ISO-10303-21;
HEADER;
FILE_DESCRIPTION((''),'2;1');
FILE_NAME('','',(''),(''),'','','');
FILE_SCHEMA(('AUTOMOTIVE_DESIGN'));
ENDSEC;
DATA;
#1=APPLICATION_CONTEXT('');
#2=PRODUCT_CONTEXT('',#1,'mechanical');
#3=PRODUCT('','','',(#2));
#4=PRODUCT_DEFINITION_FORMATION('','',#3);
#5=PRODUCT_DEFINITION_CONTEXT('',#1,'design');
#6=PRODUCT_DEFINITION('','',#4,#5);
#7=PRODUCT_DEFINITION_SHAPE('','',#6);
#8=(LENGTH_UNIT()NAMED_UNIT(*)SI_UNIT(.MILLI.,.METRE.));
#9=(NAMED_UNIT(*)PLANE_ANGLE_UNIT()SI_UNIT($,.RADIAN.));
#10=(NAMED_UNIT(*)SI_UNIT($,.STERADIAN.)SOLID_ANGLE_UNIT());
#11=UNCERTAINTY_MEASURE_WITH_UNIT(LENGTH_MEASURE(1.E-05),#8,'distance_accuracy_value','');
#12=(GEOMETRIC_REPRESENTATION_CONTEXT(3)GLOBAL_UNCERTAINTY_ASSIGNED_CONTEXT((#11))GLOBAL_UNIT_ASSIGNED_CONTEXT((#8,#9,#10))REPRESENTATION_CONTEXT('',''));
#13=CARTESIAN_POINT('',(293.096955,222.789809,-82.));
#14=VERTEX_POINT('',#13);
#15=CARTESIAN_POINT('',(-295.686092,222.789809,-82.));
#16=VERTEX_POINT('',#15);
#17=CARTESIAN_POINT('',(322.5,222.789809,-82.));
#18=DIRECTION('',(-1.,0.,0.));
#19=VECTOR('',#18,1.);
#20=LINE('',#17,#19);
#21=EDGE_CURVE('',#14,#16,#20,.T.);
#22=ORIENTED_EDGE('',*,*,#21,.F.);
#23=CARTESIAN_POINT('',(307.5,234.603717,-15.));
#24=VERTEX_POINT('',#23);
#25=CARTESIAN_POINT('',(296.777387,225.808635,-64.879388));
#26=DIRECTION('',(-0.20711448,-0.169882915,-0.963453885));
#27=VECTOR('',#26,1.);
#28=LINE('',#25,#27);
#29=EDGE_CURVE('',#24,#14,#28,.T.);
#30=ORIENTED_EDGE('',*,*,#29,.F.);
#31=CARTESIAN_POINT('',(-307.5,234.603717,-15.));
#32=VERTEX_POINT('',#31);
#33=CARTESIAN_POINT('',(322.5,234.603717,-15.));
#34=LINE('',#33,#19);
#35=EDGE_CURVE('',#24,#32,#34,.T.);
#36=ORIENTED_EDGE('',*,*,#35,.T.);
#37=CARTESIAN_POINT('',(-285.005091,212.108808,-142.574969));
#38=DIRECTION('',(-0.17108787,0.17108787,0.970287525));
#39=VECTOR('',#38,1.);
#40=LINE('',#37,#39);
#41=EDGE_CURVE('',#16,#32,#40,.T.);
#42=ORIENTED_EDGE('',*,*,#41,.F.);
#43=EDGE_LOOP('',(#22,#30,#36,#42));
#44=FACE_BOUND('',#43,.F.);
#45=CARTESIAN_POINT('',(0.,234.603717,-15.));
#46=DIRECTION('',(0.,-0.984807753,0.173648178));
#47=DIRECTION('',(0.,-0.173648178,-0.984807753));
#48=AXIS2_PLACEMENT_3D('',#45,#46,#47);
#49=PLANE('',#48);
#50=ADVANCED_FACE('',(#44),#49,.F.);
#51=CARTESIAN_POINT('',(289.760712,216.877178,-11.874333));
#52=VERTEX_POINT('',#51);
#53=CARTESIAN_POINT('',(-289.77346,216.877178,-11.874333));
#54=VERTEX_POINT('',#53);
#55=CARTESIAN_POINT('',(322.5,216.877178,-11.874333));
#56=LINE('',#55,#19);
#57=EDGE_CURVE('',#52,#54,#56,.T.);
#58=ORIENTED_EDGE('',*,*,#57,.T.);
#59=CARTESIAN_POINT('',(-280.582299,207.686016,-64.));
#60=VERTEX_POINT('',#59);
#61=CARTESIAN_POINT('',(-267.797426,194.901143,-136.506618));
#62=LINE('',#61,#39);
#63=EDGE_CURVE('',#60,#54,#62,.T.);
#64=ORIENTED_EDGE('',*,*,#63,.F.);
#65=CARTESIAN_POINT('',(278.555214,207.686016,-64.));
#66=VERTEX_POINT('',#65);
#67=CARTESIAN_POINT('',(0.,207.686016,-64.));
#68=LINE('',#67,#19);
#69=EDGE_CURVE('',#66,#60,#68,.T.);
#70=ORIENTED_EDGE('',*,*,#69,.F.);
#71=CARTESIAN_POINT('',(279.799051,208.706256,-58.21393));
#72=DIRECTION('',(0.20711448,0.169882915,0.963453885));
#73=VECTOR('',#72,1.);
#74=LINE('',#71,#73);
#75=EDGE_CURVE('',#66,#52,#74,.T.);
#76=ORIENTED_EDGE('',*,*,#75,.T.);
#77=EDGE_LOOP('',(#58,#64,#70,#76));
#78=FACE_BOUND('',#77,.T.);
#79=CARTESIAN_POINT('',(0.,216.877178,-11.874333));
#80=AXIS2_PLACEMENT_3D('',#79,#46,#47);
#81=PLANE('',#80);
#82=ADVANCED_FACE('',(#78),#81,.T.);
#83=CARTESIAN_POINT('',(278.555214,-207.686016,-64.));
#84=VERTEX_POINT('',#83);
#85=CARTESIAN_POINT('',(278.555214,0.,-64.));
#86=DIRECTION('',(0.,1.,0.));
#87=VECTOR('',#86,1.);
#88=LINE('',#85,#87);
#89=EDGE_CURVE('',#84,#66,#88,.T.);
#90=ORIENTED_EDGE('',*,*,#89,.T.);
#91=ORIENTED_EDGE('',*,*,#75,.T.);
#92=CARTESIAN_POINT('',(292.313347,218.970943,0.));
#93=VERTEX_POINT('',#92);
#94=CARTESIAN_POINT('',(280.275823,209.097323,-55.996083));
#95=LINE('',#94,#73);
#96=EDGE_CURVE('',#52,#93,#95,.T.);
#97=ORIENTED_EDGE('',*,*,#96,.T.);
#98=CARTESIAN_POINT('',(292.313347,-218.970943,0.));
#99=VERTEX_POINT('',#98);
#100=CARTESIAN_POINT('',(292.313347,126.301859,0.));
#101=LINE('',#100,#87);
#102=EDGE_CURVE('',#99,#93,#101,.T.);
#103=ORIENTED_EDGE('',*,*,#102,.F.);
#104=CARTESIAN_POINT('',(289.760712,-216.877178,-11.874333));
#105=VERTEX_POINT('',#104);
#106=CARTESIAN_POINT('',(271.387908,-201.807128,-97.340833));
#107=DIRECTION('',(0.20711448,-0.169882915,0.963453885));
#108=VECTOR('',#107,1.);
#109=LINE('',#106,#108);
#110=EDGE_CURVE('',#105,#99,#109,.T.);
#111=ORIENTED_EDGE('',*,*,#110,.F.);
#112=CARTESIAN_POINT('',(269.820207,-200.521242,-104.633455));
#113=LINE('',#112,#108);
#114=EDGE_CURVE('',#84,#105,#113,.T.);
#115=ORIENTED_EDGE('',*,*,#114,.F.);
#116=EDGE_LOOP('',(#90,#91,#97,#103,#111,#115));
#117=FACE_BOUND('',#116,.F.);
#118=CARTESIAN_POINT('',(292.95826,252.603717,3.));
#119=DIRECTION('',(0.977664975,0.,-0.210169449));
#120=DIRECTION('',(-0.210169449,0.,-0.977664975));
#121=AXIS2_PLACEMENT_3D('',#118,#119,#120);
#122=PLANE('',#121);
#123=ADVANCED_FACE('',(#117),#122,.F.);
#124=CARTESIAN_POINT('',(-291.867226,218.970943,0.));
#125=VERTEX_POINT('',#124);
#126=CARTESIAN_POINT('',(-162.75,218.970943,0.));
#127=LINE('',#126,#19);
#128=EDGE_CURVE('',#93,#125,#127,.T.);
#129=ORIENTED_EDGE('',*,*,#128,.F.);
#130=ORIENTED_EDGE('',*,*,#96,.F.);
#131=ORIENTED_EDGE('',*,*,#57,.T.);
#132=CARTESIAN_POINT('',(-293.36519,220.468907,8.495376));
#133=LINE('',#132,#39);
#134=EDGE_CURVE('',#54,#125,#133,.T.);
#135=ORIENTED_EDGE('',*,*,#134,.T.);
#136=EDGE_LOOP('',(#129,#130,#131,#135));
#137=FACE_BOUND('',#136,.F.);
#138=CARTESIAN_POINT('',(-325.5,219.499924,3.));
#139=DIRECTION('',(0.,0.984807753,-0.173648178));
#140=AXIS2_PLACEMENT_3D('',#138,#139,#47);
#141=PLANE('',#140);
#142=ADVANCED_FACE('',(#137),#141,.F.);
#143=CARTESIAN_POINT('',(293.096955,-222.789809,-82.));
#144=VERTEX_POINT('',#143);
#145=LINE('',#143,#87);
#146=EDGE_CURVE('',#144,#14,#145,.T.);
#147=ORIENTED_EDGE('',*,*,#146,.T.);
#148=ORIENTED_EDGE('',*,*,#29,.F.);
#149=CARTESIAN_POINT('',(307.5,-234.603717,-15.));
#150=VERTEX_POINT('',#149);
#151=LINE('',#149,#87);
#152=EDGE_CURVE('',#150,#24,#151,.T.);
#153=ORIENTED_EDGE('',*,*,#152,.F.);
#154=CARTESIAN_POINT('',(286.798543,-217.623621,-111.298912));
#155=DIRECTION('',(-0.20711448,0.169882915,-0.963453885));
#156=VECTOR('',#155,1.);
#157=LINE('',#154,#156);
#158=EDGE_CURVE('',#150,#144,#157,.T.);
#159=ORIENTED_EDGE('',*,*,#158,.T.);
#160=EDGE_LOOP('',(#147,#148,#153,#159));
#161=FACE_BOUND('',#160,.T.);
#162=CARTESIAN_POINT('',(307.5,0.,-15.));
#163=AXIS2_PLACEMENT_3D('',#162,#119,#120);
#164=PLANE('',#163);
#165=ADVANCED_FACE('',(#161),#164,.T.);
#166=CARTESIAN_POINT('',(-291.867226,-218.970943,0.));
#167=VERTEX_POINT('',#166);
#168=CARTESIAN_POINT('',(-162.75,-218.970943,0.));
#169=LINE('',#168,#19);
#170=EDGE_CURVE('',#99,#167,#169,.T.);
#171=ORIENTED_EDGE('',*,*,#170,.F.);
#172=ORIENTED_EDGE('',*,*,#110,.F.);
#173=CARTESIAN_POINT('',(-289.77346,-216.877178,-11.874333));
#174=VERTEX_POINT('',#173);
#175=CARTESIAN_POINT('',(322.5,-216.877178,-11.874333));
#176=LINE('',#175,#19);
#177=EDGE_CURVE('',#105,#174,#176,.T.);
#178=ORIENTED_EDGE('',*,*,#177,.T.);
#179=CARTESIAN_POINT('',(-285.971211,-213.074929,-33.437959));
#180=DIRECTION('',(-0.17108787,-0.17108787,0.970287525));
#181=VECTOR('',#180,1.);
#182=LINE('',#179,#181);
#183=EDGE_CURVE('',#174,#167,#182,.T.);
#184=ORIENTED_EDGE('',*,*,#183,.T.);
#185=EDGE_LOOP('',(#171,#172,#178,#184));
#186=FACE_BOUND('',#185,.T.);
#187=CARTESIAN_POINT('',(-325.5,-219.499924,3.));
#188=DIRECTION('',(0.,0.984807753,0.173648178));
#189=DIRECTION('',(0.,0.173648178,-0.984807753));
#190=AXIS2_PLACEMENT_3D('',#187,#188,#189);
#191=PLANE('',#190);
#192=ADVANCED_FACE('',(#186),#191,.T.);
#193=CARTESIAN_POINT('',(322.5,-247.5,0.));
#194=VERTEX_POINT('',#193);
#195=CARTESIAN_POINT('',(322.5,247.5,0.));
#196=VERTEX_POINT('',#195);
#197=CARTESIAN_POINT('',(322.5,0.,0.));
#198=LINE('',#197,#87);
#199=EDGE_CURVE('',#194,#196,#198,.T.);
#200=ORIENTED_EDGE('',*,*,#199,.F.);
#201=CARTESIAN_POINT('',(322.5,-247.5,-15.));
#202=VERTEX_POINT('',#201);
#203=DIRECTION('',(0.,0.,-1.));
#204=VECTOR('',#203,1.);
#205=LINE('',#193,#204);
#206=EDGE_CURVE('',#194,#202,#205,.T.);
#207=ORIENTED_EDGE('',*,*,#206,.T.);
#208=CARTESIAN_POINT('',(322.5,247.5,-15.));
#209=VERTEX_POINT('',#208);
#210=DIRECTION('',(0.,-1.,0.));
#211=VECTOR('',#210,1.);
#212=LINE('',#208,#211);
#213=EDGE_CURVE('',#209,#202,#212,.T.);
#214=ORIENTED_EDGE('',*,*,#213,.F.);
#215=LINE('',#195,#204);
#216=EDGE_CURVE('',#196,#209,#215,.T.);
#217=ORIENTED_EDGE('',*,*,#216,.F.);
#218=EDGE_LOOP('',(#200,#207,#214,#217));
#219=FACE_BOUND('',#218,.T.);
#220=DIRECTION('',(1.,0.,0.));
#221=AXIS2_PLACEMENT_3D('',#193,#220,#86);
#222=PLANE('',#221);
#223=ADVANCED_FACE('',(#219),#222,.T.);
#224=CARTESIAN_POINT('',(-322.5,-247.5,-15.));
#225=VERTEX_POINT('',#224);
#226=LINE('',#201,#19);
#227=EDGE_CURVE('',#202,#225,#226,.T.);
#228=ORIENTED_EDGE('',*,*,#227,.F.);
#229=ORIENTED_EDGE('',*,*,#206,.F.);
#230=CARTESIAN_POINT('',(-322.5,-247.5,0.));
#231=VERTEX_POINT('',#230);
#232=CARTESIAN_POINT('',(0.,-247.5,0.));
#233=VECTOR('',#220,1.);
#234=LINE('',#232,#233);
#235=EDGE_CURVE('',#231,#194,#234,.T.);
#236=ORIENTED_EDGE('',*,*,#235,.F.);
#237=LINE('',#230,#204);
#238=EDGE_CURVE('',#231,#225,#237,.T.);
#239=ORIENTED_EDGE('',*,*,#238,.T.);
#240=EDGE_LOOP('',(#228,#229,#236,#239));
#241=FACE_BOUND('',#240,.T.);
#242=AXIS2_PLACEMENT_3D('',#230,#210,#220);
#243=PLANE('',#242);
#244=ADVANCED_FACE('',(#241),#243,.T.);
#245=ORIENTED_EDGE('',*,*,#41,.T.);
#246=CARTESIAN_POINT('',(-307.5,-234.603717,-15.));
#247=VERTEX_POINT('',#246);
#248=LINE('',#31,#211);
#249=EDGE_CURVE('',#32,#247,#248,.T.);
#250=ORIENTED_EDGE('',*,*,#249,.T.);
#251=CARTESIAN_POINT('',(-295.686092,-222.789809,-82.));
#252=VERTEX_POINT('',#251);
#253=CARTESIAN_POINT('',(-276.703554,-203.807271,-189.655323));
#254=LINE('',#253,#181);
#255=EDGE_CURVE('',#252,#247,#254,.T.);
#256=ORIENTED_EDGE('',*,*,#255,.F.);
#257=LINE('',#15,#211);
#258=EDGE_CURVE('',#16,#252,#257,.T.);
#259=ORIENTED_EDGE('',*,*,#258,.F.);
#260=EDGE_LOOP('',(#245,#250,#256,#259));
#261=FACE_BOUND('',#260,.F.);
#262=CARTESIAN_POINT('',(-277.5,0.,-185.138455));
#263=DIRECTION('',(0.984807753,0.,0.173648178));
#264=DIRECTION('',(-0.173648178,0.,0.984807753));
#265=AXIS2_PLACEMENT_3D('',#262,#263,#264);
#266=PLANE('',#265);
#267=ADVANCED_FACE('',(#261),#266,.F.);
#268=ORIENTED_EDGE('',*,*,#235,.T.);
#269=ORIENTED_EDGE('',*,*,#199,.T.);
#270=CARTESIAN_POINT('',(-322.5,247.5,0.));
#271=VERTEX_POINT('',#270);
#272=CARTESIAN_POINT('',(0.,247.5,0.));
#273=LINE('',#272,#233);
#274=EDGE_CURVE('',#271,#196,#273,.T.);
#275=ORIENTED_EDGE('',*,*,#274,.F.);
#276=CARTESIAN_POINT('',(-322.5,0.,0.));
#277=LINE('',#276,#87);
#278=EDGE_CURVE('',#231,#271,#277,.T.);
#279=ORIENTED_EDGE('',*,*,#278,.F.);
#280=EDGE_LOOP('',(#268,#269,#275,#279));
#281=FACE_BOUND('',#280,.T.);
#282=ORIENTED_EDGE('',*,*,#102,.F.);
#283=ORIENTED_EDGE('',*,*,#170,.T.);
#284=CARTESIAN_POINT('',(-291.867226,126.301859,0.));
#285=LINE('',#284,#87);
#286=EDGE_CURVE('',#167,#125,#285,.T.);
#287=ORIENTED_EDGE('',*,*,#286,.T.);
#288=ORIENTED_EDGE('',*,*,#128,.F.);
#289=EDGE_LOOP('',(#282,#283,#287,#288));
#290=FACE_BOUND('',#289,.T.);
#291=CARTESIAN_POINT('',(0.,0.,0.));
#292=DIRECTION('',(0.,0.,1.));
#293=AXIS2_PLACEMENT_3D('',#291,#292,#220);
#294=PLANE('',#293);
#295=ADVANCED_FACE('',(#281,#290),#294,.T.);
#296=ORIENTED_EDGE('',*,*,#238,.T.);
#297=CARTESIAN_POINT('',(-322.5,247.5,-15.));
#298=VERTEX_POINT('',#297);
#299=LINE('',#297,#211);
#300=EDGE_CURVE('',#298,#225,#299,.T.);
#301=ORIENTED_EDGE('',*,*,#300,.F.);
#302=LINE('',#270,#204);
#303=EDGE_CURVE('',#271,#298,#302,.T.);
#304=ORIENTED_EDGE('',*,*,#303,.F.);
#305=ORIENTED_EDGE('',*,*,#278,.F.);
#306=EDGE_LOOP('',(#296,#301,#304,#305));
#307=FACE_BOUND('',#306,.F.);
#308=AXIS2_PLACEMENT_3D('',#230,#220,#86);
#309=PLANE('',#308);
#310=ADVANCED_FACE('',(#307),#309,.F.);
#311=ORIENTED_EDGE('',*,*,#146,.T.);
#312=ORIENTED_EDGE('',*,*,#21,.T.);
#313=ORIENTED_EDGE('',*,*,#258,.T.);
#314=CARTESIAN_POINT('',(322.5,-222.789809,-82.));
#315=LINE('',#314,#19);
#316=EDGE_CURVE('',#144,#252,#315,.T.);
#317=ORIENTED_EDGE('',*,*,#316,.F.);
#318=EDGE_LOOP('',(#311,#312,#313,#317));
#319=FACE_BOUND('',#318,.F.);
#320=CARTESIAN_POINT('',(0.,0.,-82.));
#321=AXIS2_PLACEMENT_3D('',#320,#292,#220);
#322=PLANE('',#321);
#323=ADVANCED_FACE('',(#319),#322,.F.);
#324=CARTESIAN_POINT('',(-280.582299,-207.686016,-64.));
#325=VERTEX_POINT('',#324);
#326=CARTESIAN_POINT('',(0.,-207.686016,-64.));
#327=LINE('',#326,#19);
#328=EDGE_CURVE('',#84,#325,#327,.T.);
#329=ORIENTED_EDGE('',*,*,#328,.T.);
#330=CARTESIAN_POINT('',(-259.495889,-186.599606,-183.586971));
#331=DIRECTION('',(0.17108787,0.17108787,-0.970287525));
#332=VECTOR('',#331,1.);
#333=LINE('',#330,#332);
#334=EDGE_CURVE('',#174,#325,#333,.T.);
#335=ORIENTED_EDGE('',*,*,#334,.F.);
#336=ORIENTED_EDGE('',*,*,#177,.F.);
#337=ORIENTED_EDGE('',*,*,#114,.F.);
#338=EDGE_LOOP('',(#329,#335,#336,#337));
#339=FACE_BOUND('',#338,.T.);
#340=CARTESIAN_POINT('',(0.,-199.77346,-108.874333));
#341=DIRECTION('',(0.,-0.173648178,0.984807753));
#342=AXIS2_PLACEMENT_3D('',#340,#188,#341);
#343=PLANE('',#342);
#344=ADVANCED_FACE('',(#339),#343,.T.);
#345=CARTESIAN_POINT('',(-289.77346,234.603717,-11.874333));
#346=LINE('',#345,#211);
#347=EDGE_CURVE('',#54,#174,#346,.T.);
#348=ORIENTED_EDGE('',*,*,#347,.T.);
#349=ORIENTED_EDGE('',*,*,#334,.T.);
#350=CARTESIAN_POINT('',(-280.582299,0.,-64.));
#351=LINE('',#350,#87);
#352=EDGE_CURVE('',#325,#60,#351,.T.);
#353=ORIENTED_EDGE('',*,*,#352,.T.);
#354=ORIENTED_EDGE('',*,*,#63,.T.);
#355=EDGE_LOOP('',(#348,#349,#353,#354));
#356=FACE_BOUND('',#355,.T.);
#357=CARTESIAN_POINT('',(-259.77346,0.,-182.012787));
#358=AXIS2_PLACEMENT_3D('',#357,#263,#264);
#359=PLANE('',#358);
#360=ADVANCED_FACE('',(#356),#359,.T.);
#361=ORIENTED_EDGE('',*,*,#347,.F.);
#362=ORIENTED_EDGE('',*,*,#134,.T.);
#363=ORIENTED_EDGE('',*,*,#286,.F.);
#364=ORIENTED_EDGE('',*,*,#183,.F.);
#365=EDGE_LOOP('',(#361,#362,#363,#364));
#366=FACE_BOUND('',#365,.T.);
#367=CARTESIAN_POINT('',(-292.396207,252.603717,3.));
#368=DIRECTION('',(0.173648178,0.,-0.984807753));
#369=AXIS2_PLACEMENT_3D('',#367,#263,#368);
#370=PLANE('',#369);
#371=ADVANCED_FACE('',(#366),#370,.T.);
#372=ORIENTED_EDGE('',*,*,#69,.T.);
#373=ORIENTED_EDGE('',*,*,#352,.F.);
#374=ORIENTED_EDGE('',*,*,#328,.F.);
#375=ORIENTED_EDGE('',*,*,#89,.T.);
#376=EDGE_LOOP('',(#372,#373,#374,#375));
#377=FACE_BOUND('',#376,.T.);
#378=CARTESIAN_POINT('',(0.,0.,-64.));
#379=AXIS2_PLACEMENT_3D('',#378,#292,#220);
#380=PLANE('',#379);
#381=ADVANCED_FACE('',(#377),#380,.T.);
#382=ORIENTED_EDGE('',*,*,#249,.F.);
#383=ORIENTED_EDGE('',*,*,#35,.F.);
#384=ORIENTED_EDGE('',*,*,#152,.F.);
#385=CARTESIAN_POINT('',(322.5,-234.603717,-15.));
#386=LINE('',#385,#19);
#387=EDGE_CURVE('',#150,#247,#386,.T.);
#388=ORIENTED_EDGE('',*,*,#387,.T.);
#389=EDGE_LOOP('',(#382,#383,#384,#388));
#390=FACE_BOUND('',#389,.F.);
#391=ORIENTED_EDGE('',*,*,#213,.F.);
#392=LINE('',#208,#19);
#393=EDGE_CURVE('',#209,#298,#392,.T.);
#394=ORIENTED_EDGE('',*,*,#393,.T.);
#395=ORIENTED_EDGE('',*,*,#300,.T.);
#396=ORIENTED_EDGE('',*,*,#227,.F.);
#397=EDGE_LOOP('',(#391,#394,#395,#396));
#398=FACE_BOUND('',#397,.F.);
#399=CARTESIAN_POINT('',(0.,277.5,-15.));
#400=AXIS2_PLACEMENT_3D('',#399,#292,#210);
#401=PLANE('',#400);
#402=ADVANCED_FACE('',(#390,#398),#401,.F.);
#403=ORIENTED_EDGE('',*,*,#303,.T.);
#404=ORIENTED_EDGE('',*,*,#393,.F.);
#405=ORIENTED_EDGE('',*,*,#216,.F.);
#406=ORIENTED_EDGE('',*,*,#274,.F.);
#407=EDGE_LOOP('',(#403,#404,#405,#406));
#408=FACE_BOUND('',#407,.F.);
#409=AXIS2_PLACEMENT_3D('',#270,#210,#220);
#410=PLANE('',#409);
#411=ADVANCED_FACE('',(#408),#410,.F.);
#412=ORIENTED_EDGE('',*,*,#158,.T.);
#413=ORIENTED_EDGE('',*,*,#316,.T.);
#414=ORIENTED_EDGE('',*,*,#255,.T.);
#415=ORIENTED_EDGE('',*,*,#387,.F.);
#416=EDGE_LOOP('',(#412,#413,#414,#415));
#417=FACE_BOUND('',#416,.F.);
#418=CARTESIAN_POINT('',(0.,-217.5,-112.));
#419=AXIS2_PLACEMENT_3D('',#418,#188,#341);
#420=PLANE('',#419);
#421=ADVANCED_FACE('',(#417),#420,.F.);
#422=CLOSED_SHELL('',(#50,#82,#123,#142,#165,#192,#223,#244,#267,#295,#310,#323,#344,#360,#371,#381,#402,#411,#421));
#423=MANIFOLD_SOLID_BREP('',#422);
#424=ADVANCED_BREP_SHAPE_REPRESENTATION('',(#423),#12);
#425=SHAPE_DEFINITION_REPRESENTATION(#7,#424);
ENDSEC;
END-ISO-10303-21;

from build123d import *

# Parameters (mm, degrees)
F0_W          = 645
F0_H          = 495
F1_DEPTH      = 82
F3_DEPTH      = 322.501
F3_DEPTH_BACK = 495
F5_DEPTH      = 365
F5_DEPTH_BACK = 341
F6_T          = 18
F6_T3_DEPTH   = 505.2074342574
F6_T5_DEPTH   = 651


# Not quite as in the source:
# - a shell that OpenCascade refuses in one call is made with other operations: the cavity is built on its own and cut out


with BuildPart() as f1:
    # F0 (on Top) → F1 (new body)
    with BuildSketch(Plane.XY):
        Rectangle(F0_W, F0_H)
    extrude(amount=-F1_DEPTH)

    # F2 (on Right) → F3 (cut, two sides)
    with BuildSketch(Plane.YZ) as f3_sk:
        Polygon((-277.5, -15), (-277.5, -112), (-217.5, -112), (-234.6037171287, -15), align=None)
        Polygon((277.5, -15), (234.6037171287, -15), (217.5, -112), (277.5, -112), align=None)
    extrude(amount=F3_DEPTH, mode=Mode.SUBTRACT)
    extrude(f3_sk.sketch, amount=-F3_DEPTH_BACK, mode=Mode.SUBTRACT)

    # F4 (on Front) → F5 (cut, two sides)
    with BuildSketch(Plane.XZ) as f5_sk:
        Polygon((-337.5, -15), (-337.5, -185.1384545885), (-277.5, -185.1384545885), (-307.5, -15), align=None)
        Polygon((337.5, -15), (307.5, -15), (277.5415446769, -154.3605614963), (337.5, -156.5929672103), align=None)
    extrude(amount=F5_DEPTH, mode=Mode.SUBTRACT)
    extrude(f5_sk.sketch, amount=-F5_DEPTH_BACK, mode=Mode.SUBTRACT)

    # F6: shell of thickness 18, made by hand


with BuildPart() as f6_core1:
    # F6_t2: copy of F1
    add(f1.part)

    # the walls: a layer under each face that stays
    f6_faces = [f6_core1.faces().sort_by_distance(p)[0] for p in [
        (-322.5, 0, -7.5),
        (0, -247.5, -7.5),
        (322.5, 0, -7.5),
        (314.537037037, -170.15625, -15),
        (0, 228.696763275, -48.5),
        (-1.2945688909, 0, -82),
        (300.2984772553, 0, -48.5),
        (0, -228.696763275, -48.5),
        (-301.5930461463, 0, -48.5),
        (0, 247.5, -7.5),
    ]]
    thicken(f6_faces, amount=-F6_T, mode=Mode.SUBTRACT)

    # F6_s4 → F6_t3 (cut)
    with BuildSketch(Plane.XZ.offset(-252.6037171287)):
        Polygon((-307.6772653955, -15.211256672), (-307.5, 3), (-292.3962066388, 3), (-289.7734604458, -11.874332802), align=None)
        Polygon((307.6759796954, -15.2178305009), (307.5, 3), (292.9582599542, 3), (289.902030457, -11.2169499127), align=None)
    extrude(amount=F6_T3_DEPTH, mode=Mode.SUBTRACT)

    # F6_s6 → F6_t5 (cut)
    with BuildSketch(Plane.YZ.offset(-325.5)):
        Polygon((-234.7809825243, -15.211256672), (-234.6037171287, 3), (-219.4999237675, 3), (-216.8771775745, -11.874332802), align=None)
        Polygon((234.7809825243, -15.211256672), (234.6037171287, 3), (219.4999237675, 3), (216.8771775745, -11.874332802), align=None)
    extrude(amount=F6_T5_DEPTH, mode=Mode.SUBTRACT)


with BuildPart() as f1_1:
    add(f1.part)

    # what is left inside the walls is the cavity
    f6_cavity = [f6_core1.part.solids().sort_by_distance(p)[0] for p in [
        (0.223061, -72.990314, -0.18),
    ]]
    add(f6_cavity, mode=Mode.SUBTRACT)


solid = f1_1.part
